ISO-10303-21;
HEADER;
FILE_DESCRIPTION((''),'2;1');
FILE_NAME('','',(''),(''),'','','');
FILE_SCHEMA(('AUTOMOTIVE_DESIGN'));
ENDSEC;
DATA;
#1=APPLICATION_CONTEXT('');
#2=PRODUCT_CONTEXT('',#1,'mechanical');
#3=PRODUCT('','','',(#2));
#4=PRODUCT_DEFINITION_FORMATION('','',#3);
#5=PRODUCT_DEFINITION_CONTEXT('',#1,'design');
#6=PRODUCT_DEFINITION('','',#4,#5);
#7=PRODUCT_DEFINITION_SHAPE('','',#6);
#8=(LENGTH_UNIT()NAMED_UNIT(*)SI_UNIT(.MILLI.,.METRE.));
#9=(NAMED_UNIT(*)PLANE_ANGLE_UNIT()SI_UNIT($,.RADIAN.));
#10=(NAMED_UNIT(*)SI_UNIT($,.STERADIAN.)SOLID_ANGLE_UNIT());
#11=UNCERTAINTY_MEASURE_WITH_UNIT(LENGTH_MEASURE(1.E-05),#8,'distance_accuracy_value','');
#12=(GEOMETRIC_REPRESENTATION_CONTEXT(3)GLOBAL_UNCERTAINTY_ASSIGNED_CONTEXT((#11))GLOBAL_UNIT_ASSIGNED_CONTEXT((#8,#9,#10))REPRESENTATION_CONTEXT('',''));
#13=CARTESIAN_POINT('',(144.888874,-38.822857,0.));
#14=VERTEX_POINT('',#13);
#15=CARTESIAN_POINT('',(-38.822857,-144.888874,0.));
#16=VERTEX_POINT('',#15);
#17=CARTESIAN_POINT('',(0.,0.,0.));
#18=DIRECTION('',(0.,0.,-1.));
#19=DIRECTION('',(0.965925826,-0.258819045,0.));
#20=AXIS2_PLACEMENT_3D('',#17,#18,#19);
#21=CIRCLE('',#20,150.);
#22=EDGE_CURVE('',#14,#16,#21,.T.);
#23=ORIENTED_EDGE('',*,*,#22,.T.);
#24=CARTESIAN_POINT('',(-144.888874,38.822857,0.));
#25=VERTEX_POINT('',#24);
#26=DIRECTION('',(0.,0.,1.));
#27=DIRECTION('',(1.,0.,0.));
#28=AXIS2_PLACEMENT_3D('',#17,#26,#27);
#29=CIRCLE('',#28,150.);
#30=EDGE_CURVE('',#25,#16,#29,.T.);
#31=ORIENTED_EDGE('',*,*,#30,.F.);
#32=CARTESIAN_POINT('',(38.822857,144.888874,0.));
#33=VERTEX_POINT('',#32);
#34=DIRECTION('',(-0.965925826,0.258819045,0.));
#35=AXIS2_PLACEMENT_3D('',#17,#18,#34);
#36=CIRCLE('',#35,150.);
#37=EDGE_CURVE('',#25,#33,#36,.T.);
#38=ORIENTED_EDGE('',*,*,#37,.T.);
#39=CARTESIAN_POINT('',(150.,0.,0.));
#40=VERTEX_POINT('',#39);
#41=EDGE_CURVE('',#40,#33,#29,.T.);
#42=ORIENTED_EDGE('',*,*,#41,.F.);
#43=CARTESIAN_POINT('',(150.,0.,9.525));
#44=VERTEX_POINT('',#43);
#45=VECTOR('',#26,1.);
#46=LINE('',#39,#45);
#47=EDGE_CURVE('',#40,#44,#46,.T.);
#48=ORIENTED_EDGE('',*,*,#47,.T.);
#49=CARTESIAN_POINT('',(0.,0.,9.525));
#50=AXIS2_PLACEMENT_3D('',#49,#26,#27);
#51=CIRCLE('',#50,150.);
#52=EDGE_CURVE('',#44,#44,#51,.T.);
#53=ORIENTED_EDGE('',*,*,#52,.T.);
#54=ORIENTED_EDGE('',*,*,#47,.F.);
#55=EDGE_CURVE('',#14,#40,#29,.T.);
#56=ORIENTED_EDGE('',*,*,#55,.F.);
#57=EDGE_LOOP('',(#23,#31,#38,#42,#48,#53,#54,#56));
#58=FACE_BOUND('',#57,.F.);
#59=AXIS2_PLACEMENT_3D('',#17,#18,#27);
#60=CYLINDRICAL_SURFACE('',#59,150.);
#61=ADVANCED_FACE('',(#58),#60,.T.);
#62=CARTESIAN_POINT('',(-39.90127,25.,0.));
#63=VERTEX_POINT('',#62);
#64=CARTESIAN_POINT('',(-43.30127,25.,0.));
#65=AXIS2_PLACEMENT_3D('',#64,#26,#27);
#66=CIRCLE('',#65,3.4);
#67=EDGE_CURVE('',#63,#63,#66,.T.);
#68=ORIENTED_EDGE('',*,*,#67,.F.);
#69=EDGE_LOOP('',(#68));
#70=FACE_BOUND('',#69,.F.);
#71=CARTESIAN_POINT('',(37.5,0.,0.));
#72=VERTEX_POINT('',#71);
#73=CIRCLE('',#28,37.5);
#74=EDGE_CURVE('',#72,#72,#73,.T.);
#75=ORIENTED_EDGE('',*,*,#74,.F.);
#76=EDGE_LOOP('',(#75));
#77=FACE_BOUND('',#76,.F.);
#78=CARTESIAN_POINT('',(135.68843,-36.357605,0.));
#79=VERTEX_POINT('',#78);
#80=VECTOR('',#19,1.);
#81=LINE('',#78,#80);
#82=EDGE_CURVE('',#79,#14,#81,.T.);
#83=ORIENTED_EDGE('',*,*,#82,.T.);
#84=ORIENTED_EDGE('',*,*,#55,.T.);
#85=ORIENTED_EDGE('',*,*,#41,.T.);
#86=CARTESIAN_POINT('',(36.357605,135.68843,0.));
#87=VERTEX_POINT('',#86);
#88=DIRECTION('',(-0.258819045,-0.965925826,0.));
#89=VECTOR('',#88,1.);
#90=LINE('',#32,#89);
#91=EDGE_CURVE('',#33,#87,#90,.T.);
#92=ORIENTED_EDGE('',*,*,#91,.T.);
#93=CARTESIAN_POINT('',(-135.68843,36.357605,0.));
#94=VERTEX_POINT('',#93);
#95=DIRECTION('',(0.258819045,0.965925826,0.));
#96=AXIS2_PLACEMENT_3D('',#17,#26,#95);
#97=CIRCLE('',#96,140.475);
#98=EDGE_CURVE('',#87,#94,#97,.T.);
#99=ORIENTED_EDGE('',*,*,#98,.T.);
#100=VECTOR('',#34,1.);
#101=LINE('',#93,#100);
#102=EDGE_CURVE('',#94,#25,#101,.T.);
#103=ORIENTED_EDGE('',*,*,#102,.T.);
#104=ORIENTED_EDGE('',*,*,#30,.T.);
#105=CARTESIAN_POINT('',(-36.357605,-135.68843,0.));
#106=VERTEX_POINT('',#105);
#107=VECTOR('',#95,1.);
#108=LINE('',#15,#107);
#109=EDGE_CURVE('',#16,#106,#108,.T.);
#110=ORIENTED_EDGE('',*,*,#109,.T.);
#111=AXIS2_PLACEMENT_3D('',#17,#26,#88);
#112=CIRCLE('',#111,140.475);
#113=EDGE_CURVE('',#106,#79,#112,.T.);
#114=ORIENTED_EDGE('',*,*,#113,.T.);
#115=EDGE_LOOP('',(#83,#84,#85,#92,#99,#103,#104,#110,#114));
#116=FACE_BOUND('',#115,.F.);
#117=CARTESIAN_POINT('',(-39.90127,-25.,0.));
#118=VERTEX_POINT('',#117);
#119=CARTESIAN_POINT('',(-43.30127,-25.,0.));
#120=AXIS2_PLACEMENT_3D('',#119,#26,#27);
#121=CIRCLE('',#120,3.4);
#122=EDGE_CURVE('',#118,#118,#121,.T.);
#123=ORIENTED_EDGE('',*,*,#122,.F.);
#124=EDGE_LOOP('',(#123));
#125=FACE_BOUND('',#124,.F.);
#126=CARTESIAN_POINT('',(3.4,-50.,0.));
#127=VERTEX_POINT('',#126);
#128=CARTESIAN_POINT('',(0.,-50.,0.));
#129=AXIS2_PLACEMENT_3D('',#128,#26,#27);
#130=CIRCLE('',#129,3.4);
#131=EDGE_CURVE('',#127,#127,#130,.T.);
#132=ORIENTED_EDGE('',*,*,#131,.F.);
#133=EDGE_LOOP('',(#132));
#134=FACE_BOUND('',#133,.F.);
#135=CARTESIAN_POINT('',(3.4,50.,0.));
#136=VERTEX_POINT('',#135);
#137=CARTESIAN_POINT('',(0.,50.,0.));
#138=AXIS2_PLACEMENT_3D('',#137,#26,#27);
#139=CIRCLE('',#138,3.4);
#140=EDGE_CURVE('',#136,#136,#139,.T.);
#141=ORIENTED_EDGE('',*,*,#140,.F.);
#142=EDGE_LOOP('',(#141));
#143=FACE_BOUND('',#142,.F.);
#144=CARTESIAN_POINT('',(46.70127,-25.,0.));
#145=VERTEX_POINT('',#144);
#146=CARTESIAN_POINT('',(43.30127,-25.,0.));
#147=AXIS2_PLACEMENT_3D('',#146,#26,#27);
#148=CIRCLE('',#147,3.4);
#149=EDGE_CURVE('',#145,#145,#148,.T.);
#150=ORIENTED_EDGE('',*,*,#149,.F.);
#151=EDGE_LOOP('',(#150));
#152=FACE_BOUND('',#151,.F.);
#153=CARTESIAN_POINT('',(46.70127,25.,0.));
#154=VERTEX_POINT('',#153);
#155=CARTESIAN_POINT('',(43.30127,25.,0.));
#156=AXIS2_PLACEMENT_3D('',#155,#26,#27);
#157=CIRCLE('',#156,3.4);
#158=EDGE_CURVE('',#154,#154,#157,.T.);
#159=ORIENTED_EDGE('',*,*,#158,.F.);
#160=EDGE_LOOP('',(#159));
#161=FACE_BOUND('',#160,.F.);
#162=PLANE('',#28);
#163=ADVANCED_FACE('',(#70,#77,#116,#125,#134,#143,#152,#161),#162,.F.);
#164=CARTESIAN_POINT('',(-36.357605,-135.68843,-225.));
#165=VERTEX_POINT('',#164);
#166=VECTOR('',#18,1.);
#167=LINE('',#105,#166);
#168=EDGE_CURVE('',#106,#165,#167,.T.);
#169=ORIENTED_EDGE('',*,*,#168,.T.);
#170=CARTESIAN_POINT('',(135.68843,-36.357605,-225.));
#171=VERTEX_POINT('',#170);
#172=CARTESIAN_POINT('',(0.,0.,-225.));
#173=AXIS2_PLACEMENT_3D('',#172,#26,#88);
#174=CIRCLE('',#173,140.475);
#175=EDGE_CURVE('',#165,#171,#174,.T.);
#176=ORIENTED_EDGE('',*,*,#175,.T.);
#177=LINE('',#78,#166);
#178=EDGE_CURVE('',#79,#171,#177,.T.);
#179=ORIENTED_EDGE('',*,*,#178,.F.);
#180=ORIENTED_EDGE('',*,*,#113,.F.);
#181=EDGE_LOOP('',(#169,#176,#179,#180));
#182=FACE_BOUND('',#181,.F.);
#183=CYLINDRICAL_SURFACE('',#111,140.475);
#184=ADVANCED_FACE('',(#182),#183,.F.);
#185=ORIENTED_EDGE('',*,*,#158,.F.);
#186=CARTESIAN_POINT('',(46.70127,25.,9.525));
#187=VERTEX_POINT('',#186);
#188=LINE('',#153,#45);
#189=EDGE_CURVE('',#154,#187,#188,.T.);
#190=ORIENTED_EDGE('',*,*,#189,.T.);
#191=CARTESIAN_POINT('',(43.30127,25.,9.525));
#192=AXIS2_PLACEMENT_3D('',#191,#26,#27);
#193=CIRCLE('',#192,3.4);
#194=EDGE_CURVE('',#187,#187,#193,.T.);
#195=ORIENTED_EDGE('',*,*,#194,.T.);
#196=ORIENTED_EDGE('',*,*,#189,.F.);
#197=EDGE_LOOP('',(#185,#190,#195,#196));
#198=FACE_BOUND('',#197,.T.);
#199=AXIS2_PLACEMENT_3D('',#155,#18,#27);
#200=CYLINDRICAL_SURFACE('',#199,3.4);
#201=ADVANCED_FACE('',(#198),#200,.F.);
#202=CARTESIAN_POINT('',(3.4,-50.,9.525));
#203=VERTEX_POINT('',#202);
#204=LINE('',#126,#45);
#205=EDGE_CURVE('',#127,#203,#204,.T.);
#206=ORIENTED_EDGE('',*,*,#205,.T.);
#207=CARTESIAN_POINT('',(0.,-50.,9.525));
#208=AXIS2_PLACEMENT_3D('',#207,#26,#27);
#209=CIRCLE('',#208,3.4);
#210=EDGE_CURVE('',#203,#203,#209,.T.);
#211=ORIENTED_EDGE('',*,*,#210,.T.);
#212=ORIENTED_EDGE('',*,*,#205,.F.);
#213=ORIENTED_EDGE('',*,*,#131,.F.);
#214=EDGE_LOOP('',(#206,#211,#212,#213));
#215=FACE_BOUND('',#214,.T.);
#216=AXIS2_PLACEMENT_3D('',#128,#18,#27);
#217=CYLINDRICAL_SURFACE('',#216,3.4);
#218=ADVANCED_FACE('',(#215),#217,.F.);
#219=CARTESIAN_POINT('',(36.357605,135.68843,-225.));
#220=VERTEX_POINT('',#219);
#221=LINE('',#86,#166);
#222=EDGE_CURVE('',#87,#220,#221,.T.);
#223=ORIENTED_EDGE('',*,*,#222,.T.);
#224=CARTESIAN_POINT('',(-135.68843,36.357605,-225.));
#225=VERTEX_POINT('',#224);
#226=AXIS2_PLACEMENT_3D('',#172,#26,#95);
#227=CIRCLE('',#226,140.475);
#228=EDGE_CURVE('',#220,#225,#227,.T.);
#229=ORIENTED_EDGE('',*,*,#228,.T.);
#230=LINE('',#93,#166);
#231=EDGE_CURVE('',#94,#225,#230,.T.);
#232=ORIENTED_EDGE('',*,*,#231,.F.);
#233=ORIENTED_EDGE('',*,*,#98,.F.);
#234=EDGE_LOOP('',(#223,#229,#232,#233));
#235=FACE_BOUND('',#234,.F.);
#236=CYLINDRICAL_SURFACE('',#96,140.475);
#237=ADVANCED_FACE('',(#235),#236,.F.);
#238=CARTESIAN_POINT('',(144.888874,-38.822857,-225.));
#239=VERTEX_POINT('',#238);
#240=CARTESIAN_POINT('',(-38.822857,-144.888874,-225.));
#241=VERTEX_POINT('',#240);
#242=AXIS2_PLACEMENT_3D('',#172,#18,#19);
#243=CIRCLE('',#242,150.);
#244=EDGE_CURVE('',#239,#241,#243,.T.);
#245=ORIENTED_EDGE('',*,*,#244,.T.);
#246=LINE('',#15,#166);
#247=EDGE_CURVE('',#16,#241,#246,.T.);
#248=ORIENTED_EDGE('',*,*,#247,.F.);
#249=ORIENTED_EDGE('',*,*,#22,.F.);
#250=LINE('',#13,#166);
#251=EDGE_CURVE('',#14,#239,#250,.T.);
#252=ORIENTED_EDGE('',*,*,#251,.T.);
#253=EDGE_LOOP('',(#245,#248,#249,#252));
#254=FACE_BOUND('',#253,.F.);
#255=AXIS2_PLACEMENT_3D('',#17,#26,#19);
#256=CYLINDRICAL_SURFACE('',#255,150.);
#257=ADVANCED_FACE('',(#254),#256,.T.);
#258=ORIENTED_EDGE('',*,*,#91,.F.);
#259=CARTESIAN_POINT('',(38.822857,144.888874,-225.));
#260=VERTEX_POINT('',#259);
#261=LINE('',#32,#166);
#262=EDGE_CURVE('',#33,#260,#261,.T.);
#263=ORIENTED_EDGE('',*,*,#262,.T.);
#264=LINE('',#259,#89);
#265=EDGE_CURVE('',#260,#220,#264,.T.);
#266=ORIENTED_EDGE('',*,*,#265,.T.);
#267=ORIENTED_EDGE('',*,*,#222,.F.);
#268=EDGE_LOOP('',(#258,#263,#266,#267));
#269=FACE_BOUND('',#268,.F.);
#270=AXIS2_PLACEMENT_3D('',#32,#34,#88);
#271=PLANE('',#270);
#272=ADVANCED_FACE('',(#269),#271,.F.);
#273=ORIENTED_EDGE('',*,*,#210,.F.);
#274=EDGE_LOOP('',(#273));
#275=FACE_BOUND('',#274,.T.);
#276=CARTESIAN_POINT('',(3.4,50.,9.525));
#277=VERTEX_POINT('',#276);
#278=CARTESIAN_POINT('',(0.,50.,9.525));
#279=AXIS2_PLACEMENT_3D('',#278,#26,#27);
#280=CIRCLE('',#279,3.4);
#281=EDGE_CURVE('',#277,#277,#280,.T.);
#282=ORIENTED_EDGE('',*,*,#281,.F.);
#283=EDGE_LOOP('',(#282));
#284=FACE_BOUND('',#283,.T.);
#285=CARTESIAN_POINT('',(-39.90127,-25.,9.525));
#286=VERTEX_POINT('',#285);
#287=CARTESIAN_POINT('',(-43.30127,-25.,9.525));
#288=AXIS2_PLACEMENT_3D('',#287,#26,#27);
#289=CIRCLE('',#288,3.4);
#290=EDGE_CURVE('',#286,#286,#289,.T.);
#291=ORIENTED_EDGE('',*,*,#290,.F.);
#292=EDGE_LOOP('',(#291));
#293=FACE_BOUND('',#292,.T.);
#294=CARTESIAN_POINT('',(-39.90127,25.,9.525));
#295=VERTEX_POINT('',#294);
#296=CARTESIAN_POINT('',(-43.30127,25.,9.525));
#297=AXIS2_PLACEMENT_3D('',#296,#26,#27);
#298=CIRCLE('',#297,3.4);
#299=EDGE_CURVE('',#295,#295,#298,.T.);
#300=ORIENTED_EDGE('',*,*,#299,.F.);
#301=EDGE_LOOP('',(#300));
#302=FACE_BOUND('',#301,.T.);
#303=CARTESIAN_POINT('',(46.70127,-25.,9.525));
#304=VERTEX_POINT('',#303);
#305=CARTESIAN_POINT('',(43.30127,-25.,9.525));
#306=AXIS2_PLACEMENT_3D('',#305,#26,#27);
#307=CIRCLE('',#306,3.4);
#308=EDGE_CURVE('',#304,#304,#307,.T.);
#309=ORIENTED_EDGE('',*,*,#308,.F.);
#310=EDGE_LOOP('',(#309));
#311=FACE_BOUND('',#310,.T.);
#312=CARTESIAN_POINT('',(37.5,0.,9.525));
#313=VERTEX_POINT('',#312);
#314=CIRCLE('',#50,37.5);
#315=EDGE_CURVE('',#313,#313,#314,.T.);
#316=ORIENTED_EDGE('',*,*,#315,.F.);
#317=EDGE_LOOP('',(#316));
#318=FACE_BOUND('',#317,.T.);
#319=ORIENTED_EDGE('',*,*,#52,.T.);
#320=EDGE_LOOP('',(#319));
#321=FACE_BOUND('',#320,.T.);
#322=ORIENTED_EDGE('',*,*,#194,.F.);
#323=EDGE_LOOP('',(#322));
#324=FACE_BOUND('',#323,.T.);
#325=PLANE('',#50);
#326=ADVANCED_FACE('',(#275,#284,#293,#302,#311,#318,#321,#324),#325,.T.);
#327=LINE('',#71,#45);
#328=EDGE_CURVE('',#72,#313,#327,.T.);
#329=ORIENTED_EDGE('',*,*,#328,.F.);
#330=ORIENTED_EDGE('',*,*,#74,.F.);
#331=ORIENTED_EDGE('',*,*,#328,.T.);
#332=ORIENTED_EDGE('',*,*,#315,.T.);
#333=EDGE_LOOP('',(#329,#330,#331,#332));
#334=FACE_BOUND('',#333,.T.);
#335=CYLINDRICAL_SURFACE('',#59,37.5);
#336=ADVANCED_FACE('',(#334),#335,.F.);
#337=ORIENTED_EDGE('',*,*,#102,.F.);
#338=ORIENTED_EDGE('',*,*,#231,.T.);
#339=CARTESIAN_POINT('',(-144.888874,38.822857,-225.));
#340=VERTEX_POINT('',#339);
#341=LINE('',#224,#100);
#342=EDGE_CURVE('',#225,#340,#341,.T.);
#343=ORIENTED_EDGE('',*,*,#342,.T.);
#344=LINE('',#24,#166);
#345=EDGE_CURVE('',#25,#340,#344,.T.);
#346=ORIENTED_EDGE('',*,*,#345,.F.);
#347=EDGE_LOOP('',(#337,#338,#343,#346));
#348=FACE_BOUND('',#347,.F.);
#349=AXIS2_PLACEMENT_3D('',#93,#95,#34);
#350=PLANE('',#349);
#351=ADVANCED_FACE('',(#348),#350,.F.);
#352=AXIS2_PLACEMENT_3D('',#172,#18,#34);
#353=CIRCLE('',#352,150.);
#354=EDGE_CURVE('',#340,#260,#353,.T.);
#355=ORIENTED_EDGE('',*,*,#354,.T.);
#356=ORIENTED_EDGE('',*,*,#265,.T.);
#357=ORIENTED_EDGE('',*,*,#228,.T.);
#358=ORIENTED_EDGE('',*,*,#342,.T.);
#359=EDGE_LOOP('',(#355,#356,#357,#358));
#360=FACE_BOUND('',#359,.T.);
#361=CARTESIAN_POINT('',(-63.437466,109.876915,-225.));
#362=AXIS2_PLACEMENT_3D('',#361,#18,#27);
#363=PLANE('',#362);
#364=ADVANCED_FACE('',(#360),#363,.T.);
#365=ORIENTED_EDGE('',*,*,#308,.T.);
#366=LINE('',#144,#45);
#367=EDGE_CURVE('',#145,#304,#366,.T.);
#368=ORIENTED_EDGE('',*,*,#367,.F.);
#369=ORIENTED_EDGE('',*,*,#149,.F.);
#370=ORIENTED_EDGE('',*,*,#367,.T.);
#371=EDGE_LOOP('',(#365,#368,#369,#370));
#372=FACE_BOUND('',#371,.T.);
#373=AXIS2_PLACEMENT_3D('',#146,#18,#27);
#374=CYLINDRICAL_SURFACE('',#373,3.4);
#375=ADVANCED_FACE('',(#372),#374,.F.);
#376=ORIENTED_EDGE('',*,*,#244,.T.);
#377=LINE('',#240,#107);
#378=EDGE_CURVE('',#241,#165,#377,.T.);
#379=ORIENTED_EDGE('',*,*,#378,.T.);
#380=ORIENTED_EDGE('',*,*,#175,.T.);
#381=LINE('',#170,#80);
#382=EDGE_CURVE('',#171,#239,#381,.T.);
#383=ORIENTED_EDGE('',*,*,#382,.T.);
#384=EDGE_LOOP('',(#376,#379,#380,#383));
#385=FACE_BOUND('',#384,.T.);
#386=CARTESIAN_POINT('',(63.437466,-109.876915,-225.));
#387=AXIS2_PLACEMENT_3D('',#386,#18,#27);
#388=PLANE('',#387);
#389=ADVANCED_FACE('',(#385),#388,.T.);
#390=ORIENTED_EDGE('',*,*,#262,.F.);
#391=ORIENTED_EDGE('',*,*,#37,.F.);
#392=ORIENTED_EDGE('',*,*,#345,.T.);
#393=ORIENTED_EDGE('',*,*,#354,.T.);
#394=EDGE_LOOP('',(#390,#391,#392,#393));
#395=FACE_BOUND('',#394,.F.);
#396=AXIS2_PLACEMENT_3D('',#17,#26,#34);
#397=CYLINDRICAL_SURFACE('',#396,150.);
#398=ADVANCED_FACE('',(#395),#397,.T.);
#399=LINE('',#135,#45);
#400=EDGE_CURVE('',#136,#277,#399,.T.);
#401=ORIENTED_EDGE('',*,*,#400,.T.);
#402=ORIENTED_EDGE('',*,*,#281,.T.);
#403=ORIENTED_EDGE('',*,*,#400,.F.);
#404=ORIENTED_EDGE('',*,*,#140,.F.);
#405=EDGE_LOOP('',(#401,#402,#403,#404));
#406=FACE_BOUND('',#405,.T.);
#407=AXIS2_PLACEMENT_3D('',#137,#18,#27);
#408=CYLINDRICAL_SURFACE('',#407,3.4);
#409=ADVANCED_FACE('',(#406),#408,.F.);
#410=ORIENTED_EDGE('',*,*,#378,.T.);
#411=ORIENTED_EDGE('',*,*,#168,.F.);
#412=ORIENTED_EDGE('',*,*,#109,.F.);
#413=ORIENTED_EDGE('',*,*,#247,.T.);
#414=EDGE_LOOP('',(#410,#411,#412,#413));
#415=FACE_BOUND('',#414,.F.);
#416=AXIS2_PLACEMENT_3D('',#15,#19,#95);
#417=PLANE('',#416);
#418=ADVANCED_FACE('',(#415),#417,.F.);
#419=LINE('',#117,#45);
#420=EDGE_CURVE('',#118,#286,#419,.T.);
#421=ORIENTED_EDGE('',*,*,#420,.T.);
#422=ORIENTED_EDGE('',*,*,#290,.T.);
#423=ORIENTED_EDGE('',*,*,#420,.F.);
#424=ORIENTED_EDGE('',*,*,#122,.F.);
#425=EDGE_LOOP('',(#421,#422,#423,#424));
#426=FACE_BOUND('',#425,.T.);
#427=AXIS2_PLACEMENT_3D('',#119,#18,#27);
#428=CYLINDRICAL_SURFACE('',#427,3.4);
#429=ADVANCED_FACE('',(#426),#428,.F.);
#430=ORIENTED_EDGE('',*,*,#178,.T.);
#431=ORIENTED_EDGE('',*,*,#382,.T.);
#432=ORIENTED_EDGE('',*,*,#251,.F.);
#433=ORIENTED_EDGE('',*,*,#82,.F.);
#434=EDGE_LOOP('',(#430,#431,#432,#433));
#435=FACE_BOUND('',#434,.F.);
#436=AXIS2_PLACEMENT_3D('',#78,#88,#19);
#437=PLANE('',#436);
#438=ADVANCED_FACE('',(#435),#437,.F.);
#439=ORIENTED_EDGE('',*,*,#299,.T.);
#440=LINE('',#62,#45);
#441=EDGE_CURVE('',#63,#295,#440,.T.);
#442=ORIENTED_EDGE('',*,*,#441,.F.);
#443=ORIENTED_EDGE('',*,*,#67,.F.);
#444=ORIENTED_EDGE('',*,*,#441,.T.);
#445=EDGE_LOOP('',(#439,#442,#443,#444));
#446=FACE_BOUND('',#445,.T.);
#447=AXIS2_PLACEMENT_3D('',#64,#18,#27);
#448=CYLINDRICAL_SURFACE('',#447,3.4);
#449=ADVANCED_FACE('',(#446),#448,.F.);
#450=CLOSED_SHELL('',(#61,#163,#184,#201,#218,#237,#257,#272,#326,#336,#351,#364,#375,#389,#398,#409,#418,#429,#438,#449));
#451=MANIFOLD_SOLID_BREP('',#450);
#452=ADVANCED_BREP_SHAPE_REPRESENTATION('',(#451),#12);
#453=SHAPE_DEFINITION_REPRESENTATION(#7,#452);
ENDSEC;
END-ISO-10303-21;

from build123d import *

# Parameters (mm, degrees)
F0_R     = 150
F0_R_2   = 3.4
F0_R_3   = 37.5
F1_DEPTH = 9.525
F3_DEPTH = 225


# Not quite as in the source:
# - a length typed as a fraction of an inch, garbled in the dataset ("3 / 203.2 mm" for 3/8 in), is restored


with BuildPart() as f1:
    # F0 (on Top) → F1 (new body)
    with BuildSketch(Plane.XY):
        Circle(F0_R)
        with Locations((-43.3012701892, -25)):
            Circle(F0_R_2, mode=Mode.SUBTRACT)
        with Locations((0, -50)):
            Circle(F0_R_2, mode=Mode.SUBTRACT)
        with Locations((43.3012701892, -25)):
            Circle(F0_R_2, mode=Mode.SUBTRACT)
        with Locations((-43.3012701892, 25)):
            Circle(F0_R_2, mode=Mode.SUBTRACT)
        Circle(F0_R_3, mode=Mode.SUBTRACT)
        with Locations((43.3012701892, 25)):
            Circle(F0_R_2, mode=Mode.SUBTRACT)
        with Locations((0, 50)):
            Circle(F0_R_2, mode=Mode.SUBTRACT)
    extrude(amount=F1_DEPTH)

    # F2 (on face) → F3 (join)
    with BuildSketch(Plane(origin=(0, 0, 0), x_dir=(1, 0, 0), z_dir=(0, 0, -1))):
        with BuildLine():
            Line((-135.688430448, -36.3576053608), (-144.8888739434, -38.8228567654))
            ThreePointArc((-144.8888739434, -38.8228567654), (-75, -129.9038105677), (38.8228567654, -144.8888739434))
            Line((38.8228567654, -144.8888739434), (36.3576053608, -135.688430448))
            ThreePointArc((36.3576053608, -135.688430448), (-70.2375, -121.6549185966), (-135.688430448, -36.3576053608))
        make_face()
        with BuildLine():
            ThreePointArc((-36.3576053608, 135.688430448), (70.2375, 121.6549185966), (135.688430448, 36.3576053608))
            Line((135.688430448, 36.3576053608), (144.8888739434, 38.8228567654))
            ThreePointArc((144.8888739434, 38.8228567654), (75, 129.9038105677), (-38.8228567654, 144.8888739434))
            Line((-38.8228567654, 144.8888739434), (-36.3576053608, 135.688430448))
        make_face()
    extrude(amount=F3_DEPTH)


solid = f1.part
